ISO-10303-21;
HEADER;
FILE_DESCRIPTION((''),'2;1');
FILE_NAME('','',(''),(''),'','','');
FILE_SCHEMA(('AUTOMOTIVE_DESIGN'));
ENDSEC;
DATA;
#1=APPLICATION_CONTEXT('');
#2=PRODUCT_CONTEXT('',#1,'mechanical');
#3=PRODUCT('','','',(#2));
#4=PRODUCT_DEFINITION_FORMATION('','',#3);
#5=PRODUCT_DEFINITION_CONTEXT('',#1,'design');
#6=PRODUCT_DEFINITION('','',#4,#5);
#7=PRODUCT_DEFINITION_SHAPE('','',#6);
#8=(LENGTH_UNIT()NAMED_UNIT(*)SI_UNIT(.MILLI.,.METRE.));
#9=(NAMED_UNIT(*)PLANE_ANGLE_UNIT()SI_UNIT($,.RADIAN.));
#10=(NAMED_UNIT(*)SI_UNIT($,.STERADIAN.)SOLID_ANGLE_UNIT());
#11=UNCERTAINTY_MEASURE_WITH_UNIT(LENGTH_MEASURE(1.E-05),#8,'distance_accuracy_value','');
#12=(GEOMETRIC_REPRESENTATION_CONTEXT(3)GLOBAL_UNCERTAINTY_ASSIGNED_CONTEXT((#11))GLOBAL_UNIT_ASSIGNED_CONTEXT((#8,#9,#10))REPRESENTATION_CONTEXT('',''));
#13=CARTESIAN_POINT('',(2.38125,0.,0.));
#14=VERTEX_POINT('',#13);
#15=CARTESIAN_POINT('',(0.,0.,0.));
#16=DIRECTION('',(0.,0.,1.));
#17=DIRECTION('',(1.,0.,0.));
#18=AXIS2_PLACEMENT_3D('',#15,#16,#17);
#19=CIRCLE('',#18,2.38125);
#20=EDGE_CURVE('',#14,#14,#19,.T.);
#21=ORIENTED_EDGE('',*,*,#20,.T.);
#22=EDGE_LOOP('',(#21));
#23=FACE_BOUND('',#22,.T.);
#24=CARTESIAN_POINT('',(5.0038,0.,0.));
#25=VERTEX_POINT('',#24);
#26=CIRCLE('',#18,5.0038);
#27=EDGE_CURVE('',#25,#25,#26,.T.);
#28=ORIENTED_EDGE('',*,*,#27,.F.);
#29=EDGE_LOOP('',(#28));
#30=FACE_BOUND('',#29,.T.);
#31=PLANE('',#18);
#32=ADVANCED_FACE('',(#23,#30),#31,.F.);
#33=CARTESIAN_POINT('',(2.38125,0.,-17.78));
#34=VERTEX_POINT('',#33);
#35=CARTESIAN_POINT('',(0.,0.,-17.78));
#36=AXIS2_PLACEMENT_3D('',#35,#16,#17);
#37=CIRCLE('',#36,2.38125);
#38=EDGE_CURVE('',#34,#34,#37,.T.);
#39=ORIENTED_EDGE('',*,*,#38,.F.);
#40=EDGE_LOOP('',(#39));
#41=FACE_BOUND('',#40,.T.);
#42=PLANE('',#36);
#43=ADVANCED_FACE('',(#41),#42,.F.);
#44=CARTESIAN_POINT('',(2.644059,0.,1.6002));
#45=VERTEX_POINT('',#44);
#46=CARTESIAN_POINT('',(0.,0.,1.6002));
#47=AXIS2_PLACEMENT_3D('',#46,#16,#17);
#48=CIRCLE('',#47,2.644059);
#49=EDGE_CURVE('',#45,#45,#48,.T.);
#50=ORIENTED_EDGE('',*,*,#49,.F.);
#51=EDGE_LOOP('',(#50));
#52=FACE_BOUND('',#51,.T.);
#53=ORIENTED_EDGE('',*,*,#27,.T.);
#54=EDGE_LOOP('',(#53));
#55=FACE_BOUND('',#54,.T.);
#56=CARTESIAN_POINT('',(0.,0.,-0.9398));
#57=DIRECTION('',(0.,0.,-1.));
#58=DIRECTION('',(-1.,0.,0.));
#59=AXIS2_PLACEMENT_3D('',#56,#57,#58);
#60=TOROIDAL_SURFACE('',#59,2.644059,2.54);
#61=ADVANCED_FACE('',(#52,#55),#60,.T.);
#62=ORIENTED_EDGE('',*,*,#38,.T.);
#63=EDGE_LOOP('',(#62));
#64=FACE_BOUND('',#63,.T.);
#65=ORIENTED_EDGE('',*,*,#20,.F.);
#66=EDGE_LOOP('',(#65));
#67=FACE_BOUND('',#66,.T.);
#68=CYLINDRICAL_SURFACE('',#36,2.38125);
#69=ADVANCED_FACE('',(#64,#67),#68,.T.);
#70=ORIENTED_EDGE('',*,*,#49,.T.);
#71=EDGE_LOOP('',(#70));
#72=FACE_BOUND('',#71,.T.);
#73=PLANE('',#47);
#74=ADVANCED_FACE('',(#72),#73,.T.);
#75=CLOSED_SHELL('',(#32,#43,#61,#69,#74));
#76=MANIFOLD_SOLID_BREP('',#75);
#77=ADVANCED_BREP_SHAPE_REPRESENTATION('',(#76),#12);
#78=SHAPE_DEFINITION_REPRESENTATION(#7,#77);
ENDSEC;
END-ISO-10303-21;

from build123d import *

# Parameters (mm, degrees)
SKETCH1_R           = 5.0038
BOSS_EXTRUDE1_DEPTH = 1.6002
SKETCH2_R           = 2.38125
BOSS_EXTRUDE2_DEPTH = 17.78
FILLET1_R           = 2.54


with BuildPart() as part:
    # Sketch1 → Boss-Extrude1 (new body)
    with BuildSketch(Plane.XY):
        Circle(SKETCH1_R)
    extrude(amount=BOSS_EXTRUDE1_DEPTH)

    # Sketch2 → Boss-Extrude2 (add)
    with BuildSketch(Plane.XY):
        Circle(SKETCH2_R)
    extrude(amount=-BOSS_EXTRUDE2_DEPTH)

    # Fillet1
    # the kernel refuses this fillet: 2.54 mm, written as the material it takes off along each edge
    with BuildSketch(Plane(origin=(0, 0, 1.6002), x_dir=(1, 0, 0), z_dir=(0, -1, 0))) as fillet1_piece_1:
        with BuildLine():
            CenterArc((2.644059345, -2.54), FILLET1_R, 21.715617283, 68.284382717)
            Line((2.644059345, 0), (2.644059345, 0.0508))
            Line((2.644059345, 0.0508), (5.0038, 0.0508))
            Line((5.0038, 0.0508), (5.0546, 0))
            ThreePointArc((5.0546, 0), (5.0546, -0.8001), (5.050994813, -1.581404))
            Line((5.050994813, -1.581404), (5.0038, -1.6002))
        make_face()
    revolve(axis=Axis((0, 0, 1.6002), (0, 0, 1)), mode=Mode.SUBTRACT)


solid = part.part
